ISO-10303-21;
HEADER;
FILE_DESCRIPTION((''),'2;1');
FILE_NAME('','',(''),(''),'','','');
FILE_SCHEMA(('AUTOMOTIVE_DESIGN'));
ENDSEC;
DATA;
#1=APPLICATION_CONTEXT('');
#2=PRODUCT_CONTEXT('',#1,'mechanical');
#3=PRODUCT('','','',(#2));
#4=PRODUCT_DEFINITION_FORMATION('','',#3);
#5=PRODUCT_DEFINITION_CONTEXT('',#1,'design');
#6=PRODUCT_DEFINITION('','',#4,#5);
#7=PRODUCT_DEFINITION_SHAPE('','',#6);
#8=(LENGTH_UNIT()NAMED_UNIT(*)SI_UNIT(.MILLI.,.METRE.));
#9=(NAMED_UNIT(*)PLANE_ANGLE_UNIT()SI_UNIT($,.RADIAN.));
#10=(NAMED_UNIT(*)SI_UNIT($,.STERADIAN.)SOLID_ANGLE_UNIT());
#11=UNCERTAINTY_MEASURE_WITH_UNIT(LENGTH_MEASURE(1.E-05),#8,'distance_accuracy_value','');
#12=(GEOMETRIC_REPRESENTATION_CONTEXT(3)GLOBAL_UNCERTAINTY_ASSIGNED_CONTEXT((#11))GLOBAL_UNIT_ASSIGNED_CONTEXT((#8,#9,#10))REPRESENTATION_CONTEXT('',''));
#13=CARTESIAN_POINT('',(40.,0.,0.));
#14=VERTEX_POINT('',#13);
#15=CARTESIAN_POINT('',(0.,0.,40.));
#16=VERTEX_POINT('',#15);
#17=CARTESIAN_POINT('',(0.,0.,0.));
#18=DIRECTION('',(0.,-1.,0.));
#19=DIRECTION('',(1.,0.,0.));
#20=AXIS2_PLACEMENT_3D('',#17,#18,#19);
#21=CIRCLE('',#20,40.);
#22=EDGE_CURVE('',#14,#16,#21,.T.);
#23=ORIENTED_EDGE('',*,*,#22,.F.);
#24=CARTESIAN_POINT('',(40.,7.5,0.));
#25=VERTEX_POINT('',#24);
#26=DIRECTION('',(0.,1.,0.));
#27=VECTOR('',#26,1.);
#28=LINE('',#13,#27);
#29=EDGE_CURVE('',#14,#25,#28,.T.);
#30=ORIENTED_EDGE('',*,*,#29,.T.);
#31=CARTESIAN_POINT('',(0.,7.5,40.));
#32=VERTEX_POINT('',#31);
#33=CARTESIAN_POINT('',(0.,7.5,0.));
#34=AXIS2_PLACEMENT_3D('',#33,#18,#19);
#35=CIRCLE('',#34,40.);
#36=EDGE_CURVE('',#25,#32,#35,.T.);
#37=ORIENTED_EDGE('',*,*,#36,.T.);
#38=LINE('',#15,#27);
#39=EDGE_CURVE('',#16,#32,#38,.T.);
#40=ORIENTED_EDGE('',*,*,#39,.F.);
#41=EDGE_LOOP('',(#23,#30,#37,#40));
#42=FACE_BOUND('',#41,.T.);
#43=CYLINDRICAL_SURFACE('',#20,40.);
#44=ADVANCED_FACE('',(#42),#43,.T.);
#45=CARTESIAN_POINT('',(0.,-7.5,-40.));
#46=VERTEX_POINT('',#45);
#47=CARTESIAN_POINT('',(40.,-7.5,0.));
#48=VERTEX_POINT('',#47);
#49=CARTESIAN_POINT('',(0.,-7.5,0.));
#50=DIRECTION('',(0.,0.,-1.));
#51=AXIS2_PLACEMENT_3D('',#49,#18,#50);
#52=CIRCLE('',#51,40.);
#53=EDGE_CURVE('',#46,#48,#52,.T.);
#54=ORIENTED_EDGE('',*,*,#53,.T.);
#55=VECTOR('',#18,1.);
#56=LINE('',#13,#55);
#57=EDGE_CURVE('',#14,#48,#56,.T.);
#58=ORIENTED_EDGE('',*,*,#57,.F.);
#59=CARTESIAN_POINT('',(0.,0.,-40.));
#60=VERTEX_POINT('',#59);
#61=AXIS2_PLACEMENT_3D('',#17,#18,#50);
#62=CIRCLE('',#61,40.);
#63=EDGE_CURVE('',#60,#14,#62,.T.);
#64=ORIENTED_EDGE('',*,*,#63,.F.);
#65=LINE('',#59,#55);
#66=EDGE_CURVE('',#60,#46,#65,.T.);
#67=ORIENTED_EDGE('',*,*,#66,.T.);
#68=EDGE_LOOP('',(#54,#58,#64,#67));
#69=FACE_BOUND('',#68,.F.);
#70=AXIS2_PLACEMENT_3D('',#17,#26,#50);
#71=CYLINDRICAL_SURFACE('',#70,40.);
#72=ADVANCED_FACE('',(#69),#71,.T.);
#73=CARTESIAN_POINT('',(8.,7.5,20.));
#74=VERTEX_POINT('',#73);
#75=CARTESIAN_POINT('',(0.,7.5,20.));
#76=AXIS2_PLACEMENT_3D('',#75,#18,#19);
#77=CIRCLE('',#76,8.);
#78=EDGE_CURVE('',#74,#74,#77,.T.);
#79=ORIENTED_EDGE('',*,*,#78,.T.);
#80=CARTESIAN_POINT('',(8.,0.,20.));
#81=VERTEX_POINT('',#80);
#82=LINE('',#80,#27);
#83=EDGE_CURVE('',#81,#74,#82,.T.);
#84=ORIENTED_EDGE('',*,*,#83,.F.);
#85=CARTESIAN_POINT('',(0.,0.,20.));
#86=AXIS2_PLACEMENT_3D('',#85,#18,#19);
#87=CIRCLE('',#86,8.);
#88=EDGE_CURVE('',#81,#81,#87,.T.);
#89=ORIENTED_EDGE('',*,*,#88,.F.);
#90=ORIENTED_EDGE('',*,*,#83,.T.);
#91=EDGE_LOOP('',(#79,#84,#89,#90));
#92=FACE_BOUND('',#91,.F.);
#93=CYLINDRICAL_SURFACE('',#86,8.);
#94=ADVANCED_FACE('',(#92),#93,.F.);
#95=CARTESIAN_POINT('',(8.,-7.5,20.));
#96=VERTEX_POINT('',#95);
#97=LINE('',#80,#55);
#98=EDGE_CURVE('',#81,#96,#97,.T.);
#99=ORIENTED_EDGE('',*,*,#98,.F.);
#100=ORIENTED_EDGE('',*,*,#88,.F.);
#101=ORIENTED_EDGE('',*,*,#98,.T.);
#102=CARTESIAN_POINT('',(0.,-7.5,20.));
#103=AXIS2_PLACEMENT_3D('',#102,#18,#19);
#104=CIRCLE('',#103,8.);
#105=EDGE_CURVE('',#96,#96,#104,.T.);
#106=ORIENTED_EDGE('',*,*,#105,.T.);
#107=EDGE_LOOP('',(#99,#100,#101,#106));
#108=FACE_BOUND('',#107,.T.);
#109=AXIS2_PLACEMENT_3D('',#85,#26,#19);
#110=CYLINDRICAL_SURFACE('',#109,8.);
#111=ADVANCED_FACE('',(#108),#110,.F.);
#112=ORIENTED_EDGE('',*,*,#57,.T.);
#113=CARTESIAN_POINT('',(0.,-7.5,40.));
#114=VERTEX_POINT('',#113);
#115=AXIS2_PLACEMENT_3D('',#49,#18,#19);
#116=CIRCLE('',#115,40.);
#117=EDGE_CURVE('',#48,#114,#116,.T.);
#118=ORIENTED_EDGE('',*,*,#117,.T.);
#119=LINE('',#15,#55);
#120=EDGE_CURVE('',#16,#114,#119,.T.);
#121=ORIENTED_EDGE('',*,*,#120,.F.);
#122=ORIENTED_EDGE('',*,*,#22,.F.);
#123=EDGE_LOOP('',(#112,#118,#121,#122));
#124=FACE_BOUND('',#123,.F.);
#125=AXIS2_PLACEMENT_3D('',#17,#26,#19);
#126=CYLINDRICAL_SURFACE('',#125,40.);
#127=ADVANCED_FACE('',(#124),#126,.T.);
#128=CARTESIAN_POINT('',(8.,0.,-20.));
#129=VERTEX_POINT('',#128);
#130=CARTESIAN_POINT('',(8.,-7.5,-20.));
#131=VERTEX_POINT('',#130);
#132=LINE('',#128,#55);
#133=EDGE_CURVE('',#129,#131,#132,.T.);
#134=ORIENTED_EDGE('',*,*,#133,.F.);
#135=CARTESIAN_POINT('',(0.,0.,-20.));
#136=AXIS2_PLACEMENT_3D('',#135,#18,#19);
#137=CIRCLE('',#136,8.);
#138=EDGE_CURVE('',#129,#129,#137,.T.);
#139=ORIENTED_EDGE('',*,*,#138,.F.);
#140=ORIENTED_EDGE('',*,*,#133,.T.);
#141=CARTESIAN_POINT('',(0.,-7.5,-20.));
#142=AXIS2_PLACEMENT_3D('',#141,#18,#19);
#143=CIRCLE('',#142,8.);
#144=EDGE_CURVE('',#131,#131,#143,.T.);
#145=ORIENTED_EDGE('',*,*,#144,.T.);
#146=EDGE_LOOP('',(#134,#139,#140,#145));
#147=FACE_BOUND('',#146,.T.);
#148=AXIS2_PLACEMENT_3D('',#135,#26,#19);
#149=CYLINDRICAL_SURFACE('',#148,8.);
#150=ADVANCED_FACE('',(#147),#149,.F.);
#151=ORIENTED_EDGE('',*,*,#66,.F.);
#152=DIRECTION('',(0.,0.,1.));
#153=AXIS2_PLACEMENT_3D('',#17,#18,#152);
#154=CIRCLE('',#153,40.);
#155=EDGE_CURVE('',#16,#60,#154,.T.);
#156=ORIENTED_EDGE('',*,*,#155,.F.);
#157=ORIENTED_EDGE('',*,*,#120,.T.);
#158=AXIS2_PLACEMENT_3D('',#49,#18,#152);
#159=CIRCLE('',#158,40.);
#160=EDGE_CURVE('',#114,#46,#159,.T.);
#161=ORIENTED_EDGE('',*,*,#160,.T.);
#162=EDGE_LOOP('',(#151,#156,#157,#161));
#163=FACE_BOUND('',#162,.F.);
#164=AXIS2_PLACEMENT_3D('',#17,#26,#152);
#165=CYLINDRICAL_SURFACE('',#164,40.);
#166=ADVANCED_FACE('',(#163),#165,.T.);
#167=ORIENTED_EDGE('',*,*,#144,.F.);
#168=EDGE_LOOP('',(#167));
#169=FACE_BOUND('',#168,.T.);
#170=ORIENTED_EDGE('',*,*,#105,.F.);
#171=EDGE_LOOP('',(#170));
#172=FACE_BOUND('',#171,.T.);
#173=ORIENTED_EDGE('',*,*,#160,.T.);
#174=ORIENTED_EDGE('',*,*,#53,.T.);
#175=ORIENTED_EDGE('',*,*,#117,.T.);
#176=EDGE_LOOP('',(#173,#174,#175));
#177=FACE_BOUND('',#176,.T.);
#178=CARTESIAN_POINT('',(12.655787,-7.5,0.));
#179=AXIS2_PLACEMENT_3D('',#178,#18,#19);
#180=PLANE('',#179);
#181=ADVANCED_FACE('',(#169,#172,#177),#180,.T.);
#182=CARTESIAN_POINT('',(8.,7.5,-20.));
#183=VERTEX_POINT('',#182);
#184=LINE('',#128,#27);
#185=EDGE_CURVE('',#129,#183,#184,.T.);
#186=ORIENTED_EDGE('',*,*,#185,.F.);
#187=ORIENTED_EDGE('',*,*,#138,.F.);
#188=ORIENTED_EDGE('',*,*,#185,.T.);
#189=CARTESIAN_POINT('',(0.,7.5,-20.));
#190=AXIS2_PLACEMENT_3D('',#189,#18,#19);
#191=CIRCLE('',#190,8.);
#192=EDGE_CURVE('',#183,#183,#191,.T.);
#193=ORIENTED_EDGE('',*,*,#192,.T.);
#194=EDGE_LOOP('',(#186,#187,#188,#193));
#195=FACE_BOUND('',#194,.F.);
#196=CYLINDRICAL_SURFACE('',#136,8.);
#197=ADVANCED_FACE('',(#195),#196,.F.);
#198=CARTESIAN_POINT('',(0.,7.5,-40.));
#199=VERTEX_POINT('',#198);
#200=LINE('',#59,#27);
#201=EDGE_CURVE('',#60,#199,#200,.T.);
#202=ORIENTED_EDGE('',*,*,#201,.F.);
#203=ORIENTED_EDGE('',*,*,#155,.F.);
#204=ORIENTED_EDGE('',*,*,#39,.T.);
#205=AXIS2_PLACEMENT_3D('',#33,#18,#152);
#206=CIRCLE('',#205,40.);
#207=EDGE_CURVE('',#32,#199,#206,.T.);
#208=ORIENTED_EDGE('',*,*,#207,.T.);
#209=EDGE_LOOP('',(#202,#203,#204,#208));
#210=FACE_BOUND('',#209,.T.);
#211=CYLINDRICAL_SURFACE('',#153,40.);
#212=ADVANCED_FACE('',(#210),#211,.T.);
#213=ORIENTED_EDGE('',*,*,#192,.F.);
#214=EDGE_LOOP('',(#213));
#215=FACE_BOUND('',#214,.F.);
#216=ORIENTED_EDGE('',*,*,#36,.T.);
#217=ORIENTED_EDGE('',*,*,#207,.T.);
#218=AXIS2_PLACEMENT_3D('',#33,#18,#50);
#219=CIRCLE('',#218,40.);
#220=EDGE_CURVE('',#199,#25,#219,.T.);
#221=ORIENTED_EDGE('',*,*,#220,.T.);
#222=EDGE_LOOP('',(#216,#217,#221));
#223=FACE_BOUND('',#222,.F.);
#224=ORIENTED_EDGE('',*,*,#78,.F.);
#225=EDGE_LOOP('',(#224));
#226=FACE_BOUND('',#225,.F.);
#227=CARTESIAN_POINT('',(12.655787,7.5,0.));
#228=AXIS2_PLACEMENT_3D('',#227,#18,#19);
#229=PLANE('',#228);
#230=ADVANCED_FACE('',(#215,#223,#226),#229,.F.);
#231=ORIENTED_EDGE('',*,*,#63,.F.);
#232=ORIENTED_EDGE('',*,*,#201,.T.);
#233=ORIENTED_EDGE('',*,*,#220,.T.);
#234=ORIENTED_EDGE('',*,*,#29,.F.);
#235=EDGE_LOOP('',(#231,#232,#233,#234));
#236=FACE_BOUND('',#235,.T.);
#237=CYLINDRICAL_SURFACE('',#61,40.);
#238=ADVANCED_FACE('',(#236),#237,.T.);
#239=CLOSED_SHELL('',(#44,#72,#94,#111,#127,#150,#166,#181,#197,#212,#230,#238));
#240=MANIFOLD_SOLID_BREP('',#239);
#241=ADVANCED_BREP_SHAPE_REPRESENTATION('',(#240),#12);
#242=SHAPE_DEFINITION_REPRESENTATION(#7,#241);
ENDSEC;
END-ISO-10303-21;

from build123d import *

# Parameters (mm, degrees)
F0_R     = 8
F1_DEPTH = 7.5


# Not quite as in the source:
# - the program builds the solid bodies; features that only make, move or delete a surface that nothing else refers to are left out


with BuildPart() as f1:
    # F0 (on Front) → F1 (new body, symmetric)
    with BuildSketch(Plane.XZ):
        with BuildLine():
            ThreePointArc((0, -40), (28.2842712475, -28.2842712475), (40, 0))
            ThreePointArc((40, 0), (28.2842712475, 28.2842712475), (0, 40))
            ThreePointArc((0, 40), (-20, 20), (0, 0))
            ThreePointArc((0, 0), (20, -20), (0, -40))
        make_face()
        with Locations((0, 20)):
            Circle(F0_R, mode=Mode.SUBTRACT)
        with BuildLine():
            ThreePointArc((0, 0), (-20, 20), (0, 40))
            ThreePointArc((0, 40), (-40, 0), (0, -40))
            ThreePointArc((0, -40), (20, -20), (0, 0))
        make_face()
        with Locations((0, -20)):
            Circle(F0_R, mode=Mode.SUBTRACT)
    extrude(amount=F1_DEPTH, both=True)


solid = f1.part
